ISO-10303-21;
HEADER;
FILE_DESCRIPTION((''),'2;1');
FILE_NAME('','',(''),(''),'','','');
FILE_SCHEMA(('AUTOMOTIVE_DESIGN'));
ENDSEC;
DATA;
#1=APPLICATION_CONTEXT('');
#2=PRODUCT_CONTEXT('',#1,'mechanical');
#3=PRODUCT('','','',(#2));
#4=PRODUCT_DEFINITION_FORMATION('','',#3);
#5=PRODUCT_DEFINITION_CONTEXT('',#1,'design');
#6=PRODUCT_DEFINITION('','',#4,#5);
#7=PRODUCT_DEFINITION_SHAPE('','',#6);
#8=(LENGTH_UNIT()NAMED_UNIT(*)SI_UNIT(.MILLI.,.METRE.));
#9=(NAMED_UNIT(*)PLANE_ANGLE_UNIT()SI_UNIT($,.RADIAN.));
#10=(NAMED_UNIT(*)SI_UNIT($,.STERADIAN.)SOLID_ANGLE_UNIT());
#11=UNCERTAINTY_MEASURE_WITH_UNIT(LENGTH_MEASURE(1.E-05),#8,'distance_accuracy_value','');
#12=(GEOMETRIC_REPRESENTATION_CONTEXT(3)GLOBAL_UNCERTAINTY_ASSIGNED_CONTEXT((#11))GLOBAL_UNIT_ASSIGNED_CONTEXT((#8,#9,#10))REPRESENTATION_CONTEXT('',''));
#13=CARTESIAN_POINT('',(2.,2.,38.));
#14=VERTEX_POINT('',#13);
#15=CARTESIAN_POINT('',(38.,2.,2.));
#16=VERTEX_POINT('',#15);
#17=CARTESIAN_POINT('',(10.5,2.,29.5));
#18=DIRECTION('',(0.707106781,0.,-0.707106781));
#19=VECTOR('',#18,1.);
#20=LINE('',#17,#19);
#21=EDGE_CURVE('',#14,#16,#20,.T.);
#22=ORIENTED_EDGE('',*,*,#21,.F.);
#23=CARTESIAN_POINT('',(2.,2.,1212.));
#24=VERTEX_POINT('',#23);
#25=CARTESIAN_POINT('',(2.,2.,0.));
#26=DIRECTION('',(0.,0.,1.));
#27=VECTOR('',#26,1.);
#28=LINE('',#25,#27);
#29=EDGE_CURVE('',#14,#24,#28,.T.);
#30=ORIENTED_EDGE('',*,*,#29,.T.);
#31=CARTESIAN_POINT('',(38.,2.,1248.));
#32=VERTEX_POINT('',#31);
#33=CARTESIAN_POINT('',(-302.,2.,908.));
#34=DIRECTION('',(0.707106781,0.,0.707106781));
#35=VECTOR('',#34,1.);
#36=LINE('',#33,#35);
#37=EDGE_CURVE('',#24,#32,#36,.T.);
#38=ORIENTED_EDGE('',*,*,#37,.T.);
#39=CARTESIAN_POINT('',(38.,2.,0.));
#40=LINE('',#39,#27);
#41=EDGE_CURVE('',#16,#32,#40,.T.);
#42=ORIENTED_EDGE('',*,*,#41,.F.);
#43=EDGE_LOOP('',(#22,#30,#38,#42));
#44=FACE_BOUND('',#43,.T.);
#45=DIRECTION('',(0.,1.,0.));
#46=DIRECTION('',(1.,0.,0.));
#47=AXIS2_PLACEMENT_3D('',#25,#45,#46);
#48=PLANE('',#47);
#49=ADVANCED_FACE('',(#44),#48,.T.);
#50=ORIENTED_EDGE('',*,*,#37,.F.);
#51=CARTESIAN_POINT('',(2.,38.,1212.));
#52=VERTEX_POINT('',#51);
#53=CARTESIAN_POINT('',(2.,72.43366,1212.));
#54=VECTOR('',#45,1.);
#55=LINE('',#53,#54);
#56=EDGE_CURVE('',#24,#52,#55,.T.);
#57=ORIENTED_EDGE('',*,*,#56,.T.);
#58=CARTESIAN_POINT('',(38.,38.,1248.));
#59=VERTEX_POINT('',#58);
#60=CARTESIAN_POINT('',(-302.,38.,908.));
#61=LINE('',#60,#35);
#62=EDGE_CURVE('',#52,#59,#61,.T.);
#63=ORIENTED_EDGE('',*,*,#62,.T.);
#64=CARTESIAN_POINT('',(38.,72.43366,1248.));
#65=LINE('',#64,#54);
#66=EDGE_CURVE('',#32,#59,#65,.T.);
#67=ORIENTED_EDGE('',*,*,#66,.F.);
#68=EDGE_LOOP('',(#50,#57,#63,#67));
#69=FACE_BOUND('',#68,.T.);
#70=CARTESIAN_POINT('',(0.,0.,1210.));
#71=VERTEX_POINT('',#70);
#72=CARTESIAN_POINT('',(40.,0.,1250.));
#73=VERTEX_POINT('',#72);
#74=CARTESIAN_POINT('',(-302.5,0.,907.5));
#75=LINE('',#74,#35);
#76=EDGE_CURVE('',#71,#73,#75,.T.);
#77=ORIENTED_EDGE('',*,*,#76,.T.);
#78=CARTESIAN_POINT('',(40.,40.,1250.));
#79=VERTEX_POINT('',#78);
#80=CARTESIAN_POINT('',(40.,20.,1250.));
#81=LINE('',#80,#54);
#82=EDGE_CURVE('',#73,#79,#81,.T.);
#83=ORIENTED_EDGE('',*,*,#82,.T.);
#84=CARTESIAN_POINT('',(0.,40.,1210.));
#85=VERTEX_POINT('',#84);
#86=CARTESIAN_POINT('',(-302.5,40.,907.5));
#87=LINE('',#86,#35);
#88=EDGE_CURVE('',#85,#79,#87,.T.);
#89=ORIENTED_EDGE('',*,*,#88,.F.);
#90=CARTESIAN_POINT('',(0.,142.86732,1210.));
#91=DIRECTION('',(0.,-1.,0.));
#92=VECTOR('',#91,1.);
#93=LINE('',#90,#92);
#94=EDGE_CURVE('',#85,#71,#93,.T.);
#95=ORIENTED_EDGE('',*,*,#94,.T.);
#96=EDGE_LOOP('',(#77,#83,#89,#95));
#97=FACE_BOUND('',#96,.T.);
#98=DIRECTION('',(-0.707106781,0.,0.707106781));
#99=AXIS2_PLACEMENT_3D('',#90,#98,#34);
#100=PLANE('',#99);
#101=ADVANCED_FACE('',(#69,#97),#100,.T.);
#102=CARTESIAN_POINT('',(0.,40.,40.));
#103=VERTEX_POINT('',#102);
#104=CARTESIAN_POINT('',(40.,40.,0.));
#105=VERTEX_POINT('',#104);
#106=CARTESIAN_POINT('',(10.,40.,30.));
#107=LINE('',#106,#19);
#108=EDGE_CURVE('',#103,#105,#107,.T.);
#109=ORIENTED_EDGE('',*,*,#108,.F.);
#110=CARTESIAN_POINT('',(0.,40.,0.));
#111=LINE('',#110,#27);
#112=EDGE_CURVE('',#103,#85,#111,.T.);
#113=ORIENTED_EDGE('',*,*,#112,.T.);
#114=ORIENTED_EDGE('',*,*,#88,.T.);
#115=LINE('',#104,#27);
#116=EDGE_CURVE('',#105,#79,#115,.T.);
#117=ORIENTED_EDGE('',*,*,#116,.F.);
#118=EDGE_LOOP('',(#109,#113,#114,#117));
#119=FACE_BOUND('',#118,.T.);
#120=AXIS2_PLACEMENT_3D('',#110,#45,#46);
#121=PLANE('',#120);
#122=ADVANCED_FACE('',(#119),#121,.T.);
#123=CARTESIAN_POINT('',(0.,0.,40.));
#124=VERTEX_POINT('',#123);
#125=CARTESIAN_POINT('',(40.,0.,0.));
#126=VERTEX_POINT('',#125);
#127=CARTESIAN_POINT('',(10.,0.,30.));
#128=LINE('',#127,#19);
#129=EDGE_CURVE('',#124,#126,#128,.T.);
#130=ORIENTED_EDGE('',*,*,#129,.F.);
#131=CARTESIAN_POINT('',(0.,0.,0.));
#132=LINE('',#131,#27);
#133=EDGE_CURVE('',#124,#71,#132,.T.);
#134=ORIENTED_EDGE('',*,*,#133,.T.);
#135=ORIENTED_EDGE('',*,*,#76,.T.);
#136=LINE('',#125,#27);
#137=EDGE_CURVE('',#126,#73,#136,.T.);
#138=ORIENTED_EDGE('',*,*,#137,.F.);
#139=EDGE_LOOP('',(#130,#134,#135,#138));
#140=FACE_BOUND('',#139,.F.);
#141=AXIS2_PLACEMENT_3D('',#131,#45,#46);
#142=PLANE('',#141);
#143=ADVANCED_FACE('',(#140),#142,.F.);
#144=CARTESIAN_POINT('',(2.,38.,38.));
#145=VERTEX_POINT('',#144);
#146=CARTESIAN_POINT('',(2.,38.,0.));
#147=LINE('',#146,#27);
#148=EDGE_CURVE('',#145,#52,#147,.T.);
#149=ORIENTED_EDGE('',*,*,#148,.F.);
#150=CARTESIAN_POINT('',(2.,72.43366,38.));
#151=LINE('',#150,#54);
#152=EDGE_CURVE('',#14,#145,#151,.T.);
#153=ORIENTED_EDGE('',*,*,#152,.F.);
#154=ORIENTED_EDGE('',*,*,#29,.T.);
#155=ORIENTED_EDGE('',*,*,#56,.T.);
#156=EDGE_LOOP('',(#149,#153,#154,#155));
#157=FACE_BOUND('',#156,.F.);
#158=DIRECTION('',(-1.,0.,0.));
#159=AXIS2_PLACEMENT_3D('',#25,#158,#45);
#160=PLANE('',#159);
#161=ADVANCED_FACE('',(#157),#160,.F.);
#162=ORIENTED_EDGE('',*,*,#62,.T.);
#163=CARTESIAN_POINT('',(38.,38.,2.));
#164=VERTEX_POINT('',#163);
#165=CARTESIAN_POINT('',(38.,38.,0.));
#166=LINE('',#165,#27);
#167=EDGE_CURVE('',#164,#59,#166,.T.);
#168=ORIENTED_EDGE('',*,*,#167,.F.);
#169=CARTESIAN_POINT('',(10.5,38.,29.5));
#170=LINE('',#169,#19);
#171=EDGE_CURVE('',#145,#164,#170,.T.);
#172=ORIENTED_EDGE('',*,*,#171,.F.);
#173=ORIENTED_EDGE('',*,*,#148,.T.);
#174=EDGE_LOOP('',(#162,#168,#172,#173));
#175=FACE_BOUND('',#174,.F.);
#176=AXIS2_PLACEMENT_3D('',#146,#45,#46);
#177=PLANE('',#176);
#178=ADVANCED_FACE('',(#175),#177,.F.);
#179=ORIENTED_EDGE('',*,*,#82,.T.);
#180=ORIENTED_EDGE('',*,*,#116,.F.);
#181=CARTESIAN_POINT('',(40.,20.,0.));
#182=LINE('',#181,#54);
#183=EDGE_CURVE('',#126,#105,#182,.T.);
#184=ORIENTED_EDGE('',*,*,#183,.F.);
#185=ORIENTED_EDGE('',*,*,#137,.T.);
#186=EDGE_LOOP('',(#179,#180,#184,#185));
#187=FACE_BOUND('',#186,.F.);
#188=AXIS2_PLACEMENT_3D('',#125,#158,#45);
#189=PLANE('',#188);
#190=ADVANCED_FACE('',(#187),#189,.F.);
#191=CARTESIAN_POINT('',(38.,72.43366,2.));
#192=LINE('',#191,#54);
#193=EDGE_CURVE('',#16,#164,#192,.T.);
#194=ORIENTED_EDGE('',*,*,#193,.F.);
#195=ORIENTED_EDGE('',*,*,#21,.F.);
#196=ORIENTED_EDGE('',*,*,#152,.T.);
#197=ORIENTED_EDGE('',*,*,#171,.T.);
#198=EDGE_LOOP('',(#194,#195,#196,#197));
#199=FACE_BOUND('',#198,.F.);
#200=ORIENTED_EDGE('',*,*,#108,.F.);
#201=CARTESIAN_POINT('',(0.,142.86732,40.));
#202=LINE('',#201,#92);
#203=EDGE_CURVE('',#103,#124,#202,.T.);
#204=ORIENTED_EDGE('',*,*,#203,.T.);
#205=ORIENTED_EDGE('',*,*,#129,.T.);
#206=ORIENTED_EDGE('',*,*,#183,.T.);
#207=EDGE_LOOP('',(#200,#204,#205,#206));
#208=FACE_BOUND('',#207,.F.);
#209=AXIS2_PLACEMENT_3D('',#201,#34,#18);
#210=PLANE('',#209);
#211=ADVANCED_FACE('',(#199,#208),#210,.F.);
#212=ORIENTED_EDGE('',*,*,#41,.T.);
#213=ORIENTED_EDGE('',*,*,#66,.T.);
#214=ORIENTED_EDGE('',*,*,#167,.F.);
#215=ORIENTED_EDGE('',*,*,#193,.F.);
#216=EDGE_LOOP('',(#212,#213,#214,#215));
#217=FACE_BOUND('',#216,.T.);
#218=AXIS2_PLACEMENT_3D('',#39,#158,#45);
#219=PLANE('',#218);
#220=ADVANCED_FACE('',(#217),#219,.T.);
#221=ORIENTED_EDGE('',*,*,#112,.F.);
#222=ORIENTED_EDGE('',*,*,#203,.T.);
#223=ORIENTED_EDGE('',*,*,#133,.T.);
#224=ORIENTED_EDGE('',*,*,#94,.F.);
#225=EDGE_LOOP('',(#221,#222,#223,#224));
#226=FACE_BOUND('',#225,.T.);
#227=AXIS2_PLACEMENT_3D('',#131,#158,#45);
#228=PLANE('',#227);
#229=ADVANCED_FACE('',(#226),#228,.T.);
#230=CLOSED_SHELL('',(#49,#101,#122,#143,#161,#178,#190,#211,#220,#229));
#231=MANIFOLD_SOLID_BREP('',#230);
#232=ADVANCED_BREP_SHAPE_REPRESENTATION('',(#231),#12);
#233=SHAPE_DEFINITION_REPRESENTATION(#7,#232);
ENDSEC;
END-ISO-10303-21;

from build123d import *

# Parameters (mm, degrees)
F0_W        = 40
F0_H        = 40
F0_W_2      = 36
F0_H_2      = 36
F1_DEPTH    = 1250
F2_T1_DEPTH = 245.7346390373


# Not quite as in the source:
# - a fillet or chamfer that OpenCascade refuses, or shapes differently, is made with other operations: its cross-section is extruded or revolved along the edge and cut away or added


with BuildPart() as f1:
    # F0 (on Top) → F1 (new body)
    with BuildSketch(Plane.XY):
        with Locations((20, 20)):
            Rectangle(F0_W, F0_H)
        with Locations((20, 20)):
            Rectangle(F0_W_2, F0_H_2, mode=Mode.SUBTRACT)
    extrude(amount=F1_DEPTH)

    # F2: chamfer of 40 on 2 edges, made by hand

    # F2_s2 → F2_t1 (cut)
    with BuildSketch(Plane.XZ.offset(-142.8673195186)):
        Polygon((0, 40), (40, 0), (0, 0), align=None)
        Polygon((0, 1210), (40, 1250), (0, 1250), align=None)
    extrude(amount=F2_T1_DEPTH, mode=Mode.SUBTRACT)


solid = f1.part
